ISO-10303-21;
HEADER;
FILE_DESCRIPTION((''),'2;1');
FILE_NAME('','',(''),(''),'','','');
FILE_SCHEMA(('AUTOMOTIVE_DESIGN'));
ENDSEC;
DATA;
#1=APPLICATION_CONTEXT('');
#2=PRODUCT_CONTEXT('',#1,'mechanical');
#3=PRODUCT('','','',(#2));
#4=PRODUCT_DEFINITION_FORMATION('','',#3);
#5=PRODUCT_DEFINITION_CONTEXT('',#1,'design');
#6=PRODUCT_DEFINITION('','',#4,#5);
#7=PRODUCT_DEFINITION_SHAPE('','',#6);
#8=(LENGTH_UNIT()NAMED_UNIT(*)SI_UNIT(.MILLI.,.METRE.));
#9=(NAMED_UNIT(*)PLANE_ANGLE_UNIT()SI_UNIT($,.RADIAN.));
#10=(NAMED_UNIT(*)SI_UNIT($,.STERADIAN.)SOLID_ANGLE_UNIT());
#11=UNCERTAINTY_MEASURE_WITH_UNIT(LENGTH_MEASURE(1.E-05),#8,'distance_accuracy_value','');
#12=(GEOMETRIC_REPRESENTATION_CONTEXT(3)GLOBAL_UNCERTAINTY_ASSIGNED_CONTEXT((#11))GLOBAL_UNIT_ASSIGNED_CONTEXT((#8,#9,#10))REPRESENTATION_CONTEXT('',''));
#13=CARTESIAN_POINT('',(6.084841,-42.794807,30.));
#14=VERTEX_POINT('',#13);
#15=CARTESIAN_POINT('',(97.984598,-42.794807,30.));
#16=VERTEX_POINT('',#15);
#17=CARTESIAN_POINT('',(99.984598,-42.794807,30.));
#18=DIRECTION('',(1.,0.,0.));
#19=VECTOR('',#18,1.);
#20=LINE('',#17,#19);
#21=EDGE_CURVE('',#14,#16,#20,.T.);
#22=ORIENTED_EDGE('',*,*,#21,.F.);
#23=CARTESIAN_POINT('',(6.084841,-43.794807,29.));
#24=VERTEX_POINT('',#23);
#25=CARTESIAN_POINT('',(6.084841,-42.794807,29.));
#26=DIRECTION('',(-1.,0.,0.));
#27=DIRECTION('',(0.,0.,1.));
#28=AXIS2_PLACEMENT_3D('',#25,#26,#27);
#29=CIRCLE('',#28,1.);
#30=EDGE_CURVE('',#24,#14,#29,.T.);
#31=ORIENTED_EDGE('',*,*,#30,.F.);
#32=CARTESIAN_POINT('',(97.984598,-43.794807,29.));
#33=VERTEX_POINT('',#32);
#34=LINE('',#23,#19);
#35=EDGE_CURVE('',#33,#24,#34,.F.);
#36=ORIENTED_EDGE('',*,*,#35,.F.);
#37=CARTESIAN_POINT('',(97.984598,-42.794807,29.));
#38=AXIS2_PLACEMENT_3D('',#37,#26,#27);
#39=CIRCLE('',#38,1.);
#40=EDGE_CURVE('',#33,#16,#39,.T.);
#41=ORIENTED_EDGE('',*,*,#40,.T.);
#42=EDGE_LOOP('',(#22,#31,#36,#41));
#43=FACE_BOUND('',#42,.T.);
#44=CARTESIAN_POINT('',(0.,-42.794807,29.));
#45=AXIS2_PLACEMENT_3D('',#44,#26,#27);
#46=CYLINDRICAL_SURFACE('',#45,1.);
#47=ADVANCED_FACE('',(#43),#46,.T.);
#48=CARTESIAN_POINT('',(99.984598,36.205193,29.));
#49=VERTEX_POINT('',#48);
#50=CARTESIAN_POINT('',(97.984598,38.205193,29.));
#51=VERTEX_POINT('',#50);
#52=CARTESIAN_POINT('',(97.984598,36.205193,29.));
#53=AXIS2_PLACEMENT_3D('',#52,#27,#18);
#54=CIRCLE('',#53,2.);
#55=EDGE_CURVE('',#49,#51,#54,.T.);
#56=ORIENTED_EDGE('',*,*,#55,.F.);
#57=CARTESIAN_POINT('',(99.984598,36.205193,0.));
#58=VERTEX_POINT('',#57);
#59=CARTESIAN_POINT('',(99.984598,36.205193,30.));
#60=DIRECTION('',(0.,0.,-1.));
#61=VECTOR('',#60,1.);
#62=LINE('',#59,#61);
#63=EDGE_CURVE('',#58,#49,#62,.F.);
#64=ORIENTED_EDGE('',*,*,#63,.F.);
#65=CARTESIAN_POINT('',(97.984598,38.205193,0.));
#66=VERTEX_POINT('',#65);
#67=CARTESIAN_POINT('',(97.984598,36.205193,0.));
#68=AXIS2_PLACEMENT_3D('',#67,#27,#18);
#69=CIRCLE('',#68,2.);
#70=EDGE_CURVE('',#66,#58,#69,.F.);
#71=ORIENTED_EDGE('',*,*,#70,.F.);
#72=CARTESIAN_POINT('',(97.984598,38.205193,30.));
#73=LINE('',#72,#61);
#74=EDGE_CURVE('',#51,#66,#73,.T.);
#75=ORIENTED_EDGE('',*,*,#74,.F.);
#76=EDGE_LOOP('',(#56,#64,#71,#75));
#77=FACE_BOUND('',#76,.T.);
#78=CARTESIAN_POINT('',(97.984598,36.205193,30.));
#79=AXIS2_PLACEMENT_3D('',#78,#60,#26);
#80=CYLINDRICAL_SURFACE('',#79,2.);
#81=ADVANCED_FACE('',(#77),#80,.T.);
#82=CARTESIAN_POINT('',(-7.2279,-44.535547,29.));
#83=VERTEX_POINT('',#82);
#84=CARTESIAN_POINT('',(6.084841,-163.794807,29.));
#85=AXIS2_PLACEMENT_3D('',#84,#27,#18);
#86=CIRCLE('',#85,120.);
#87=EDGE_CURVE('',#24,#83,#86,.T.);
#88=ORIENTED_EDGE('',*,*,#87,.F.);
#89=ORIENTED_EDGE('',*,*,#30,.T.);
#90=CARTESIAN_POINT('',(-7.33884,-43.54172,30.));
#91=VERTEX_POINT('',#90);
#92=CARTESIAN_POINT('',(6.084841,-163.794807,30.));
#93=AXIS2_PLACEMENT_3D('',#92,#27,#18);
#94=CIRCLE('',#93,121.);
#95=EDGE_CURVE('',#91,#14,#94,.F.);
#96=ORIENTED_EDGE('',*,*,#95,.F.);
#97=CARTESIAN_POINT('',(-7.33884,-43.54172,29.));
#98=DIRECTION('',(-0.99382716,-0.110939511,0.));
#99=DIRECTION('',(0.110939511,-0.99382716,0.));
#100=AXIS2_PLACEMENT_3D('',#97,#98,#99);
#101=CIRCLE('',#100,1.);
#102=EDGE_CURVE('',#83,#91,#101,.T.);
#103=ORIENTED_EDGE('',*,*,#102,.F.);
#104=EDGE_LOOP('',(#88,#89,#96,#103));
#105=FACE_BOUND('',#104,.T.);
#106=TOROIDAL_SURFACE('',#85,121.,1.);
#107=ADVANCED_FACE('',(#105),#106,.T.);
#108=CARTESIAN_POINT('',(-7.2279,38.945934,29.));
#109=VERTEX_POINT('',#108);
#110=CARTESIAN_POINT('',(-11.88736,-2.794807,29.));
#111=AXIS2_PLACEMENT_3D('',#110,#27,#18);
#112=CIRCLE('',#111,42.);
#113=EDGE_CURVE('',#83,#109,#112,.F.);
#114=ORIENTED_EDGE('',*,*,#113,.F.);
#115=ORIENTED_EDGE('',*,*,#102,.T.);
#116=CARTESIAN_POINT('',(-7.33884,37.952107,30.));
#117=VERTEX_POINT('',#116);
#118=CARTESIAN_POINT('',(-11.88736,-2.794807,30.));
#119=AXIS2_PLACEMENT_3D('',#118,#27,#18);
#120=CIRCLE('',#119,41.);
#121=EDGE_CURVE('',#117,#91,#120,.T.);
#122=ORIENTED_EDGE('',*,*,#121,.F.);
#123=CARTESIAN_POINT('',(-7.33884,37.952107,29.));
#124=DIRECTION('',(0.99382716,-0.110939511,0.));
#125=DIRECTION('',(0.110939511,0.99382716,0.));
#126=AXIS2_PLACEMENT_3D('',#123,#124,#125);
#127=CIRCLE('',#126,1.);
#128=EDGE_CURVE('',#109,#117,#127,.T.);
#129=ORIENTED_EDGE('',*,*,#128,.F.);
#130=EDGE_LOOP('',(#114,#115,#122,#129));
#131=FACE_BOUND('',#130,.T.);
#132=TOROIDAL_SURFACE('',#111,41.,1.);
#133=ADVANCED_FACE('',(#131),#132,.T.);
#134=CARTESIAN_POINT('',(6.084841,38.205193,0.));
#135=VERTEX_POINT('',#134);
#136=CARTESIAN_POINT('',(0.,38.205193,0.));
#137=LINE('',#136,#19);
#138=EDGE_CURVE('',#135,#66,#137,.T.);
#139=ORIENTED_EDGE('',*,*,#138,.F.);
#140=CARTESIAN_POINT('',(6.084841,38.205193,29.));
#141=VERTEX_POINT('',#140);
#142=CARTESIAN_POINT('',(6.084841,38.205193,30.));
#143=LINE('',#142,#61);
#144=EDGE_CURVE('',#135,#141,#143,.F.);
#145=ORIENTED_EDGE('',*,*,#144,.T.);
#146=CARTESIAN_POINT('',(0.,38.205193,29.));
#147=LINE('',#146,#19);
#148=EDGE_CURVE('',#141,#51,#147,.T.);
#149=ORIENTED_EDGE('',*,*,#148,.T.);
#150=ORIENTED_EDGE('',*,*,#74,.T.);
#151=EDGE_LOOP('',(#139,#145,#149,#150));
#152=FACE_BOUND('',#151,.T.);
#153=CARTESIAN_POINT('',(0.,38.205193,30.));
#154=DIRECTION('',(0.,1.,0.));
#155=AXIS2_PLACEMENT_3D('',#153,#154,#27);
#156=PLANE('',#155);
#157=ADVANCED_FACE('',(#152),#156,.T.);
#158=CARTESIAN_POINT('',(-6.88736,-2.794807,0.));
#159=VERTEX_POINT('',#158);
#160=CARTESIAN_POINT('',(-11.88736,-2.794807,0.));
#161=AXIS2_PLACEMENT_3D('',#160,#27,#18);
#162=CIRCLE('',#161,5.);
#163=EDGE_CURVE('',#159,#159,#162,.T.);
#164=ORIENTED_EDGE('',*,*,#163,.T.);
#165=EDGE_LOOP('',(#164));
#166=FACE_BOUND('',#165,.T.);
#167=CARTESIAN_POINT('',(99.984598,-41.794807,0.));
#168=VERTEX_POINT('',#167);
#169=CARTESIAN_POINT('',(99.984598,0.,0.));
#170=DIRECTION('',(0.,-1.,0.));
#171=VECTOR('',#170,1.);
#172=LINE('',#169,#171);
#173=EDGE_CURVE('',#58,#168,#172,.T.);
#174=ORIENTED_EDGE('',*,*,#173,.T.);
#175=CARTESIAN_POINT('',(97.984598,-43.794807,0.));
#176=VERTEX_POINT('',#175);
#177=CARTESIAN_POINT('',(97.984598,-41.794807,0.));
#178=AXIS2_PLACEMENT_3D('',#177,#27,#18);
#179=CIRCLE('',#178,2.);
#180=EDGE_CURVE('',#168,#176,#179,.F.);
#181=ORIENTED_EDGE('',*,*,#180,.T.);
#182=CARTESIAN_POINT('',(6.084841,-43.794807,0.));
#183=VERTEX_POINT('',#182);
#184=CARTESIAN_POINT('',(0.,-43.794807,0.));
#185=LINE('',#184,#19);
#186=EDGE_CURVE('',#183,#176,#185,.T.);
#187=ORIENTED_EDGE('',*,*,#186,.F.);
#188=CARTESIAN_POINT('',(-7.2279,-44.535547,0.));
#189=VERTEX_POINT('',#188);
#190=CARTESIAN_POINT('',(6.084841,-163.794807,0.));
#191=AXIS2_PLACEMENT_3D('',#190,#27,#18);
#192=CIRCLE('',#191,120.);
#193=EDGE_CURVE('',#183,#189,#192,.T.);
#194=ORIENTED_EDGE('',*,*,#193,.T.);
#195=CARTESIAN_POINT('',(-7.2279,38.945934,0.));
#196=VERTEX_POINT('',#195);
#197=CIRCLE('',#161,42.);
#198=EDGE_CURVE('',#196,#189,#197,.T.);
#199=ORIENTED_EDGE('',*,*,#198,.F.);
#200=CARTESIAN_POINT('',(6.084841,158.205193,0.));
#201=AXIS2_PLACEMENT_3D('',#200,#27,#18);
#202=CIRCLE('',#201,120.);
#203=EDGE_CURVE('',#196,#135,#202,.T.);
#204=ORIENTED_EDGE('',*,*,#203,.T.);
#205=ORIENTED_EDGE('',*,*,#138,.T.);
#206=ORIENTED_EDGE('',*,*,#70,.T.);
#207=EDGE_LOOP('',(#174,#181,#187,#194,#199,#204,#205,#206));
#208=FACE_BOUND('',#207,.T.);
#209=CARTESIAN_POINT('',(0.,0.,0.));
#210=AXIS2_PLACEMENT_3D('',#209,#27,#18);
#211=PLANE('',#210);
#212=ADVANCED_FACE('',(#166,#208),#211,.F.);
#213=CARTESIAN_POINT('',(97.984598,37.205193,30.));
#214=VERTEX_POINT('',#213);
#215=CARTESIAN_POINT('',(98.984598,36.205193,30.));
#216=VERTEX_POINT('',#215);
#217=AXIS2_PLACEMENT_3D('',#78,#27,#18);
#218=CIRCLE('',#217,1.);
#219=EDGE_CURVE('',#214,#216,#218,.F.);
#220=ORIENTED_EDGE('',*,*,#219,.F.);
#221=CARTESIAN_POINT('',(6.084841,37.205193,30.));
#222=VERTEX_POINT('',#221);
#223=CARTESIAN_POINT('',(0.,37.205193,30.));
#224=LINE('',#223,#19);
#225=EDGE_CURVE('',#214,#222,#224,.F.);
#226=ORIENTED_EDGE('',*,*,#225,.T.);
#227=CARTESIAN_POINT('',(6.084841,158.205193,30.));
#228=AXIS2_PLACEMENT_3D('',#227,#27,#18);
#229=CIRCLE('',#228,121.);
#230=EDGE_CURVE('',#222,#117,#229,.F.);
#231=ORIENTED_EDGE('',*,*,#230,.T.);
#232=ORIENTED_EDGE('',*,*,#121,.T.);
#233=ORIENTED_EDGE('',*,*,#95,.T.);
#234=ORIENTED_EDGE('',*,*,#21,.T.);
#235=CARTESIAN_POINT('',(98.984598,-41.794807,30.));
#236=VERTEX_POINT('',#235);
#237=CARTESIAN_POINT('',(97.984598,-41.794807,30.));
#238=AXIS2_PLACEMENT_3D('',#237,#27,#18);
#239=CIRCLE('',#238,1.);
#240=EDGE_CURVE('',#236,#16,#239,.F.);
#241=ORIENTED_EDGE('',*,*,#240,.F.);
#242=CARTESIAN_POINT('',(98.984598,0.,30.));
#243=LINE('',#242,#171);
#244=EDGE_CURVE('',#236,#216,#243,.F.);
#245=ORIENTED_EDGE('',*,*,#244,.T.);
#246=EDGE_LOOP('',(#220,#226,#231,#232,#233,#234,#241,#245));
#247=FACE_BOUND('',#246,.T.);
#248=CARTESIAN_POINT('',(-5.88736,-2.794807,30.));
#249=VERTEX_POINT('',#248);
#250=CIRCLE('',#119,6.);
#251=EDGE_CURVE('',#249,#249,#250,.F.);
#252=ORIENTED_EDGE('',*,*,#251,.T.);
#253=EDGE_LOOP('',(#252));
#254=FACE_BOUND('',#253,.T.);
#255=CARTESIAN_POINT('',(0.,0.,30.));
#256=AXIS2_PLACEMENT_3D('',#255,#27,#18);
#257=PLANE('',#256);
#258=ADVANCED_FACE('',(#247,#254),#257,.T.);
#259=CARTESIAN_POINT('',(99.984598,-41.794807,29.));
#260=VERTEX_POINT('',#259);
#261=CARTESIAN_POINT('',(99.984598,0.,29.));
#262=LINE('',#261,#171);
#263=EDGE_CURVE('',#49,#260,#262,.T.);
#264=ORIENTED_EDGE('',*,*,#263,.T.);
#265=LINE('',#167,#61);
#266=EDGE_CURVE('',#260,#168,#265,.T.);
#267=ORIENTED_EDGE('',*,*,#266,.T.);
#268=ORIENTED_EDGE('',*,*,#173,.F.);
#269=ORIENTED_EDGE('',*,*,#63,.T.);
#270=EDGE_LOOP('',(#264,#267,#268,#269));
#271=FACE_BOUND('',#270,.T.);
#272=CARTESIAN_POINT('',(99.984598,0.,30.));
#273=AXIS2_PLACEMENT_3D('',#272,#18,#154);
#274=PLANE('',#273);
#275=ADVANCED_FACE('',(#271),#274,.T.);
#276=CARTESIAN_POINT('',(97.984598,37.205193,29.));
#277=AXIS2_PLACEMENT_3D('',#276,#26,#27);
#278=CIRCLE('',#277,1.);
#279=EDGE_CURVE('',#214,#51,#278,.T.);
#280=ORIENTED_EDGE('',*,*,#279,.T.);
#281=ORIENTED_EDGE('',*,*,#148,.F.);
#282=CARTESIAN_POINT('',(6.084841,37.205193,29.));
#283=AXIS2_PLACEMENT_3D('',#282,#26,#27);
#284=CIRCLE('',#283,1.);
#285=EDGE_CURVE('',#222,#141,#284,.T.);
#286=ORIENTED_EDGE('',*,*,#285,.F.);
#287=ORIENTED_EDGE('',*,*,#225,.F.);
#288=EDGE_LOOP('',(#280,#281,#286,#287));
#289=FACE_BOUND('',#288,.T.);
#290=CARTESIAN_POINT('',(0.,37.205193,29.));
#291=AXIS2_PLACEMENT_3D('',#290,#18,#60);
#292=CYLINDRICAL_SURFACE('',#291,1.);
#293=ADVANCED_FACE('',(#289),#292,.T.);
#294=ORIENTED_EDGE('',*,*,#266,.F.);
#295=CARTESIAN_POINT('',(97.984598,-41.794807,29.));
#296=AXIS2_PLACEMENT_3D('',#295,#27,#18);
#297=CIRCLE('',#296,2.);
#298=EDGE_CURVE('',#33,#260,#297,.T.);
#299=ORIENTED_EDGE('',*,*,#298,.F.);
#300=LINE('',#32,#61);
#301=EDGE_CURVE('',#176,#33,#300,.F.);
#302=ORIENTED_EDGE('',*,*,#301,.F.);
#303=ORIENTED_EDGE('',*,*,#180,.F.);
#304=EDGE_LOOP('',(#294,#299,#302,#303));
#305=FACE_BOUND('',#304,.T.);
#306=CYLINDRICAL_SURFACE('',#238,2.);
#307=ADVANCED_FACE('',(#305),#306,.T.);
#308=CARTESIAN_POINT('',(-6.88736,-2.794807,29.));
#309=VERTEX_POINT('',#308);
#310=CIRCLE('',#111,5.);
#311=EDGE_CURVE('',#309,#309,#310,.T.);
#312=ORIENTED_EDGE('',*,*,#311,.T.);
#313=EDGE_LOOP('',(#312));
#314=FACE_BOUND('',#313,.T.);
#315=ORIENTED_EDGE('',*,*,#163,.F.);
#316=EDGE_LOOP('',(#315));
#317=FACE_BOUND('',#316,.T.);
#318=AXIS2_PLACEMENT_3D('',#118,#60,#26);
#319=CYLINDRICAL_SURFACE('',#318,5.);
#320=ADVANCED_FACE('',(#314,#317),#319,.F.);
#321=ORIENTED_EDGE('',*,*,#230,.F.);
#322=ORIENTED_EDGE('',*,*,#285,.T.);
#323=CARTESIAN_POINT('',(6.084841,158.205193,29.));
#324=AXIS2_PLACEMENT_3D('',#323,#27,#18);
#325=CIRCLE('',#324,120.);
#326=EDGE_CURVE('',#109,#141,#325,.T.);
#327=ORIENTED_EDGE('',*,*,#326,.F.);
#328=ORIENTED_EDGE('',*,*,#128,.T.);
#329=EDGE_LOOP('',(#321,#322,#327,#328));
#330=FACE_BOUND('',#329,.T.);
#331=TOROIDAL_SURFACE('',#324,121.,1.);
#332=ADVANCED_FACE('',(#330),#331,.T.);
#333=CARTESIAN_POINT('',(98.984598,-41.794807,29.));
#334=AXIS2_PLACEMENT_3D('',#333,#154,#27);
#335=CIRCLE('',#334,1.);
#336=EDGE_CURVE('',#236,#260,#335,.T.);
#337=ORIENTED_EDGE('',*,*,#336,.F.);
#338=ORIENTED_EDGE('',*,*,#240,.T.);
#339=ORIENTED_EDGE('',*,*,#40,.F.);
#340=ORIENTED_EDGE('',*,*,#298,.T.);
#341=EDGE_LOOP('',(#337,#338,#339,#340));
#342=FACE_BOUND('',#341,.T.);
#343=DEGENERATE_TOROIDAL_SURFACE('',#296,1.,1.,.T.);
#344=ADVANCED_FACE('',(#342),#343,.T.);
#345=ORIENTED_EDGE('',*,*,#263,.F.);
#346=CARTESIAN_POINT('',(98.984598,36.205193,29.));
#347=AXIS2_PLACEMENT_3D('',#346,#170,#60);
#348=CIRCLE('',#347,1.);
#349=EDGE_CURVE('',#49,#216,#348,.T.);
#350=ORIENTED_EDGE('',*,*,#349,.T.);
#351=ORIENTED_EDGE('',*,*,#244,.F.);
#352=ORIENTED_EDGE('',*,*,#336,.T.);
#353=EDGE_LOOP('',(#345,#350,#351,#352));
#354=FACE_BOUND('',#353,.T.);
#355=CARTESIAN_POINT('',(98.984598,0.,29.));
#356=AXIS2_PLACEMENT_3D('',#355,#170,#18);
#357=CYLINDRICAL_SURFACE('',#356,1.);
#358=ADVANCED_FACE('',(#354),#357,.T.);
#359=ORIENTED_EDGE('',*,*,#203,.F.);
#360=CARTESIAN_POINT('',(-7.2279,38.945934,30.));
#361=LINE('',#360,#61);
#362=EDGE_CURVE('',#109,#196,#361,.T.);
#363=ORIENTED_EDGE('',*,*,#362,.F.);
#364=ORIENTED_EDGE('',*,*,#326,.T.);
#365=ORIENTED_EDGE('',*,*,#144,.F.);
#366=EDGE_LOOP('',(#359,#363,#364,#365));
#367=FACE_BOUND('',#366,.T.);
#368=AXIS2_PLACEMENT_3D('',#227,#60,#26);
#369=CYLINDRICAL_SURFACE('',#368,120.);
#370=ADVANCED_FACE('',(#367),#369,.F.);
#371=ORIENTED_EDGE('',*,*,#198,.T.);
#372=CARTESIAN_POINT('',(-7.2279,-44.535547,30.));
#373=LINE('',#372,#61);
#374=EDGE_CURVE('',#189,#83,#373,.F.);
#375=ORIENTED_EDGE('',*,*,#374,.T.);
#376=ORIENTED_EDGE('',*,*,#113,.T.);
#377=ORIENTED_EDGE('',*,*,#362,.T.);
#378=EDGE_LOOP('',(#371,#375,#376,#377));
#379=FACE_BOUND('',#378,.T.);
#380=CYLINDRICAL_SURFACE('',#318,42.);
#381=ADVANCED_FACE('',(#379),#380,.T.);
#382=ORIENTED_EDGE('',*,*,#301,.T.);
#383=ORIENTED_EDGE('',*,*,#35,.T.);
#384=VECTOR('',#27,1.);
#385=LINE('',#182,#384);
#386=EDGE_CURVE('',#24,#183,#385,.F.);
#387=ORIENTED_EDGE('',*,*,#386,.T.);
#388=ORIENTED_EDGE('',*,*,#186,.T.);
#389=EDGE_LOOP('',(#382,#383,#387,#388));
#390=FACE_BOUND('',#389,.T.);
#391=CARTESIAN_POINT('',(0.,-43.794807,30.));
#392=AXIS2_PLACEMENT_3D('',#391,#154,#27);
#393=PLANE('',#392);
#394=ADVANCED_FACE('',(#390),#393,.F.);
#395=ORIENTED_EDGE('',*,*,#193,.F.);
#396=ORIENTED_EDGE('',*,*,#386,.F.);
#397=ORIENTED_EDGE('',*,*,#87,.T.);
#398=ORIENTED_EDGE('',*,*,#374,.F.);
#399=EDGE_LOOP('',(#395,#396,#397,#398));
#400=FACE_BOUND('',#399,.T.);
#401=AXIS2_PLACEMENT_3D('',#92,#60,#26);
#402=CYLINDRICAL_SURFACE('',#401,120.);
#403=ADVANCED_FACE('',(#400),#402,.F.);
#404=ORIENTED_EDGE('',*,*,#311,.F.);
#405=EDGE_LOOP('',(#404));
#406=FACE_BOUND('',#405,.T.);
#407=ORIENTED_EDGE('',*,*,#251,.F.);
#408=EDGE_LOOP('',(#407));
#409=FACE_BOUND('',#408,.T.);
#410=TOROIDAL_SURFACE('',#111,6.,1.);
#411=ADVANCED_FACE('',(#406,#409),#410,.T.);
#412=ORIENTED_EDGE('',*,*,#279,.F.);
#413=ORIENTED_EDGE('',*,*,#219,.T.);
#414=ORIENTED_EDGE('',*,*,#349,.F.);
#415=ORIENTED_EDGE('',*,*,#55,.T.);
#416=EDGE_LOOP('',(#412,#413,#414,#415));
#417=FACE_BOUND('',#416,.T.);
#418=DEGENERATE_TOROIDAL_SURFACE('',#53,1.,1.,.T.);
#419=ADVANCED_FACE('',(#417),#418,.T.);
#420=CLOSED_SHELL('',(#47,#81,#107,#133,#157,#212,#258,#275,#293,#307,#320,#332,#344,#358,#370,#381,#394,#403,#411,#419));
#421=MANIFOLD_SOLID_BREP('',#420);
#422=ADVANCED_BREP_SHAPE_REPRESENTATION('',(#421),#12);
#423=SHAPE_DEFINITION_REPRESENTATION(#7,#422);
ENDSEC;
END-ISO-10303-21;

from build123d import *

# Parameters (mm, degrees)
SKETCH_1_R      = 5
EXTRUDE_1_DEPTH = 30
FILLET_1_R      = 120
FILLET_2_R      = 1
FILLET_3_R      = 1
FILLET_4_R      = 2


with BuildPart() as part:
    # 草图1 → 凸台-拉伸1 (new body)
    with BuildSketch(Plane.XY):
        with BuildLine():
            Line((-2.776926107, -43.794806673), (99.984598045, -43.794806673))
            Line((99.984598045, -43.794806673), (99.984598045, 38.205193327))
            Line((99.984598045, 38.205193327), (-2.776926107, 38.205193327))
            ThreePointArc((-2.776926107, 38.205193327), (-53.887359686, -2.794806673), (-2.776926107, -43.794806673))
        make_face()
        with Locations((-11.887359686, -2.794806673)):
            Circle(SKETCH_1_R, mode=Mode.SUBTRACT)
    extrude(amount=EXTRUDE_1_DEPTH)

    # 圆角1
    fillet_1_edges = [part.edges().sort_by_distance(p)[0] for p in [
        (-2.776926107, 38.205193327, 15),
        (-2.776926107, -43.794806673, 15),
    ]]
    fillet(fillet_1_edges, radius=FILLET_1_R)

    # 圆角2
    fillet_2_edges = [part.edges().sort_by_distance(p)[0] for p in [
        (-16.887359686, -2.794806673, 30),
    ]]
    fillet(fillet_2_edges, radius=FILLET_2_R)

    # 圆角3
    fillet_3_edges = [part.edges().sort_by_distance(p)[0] for p in [
        (99.984598045, -2.794806673, 30),
        (-53.887359686, -2.794806673, 30),
        (53.034719557, 38.205193327, 30),
        (53.034719557, -43.794806673, 30),
        (-0.581825597, 38.390521623, 30),
        (-0.581825597, -43.980134969, 30),
    ]]
    fillet(fillet_3_edges, radius=FILLET_3_R)

    # 圆角4
    # the kernel refuses this fillet: 2 mm, written as the material it takes off along each edge
    with BuildSketch(Plane(origin=(97.984598045, -41.794806673, 30), x_dir=(0, -1, 0), z_dir=(-1, 0, 0))) as fillet_4_piece_1:
        with BuildLine():
            CenterArc((1, -1), 1, 0, 90)
            Line((2, -1), (2, 0))
            Line((2, 0), (1, 0))
        make_face()
    revolve(axis=Axis((97.984598045, -41.794806673, 30), (0, 0, 1)), revolution_arc=90, mode=Mode.SUBTRACT)
    with BuildSketch(Plane(origin=(97.984598045, 36.205193327, 30), x_dir=(1, 0, 0), z_dir=(0, -1, 0))) as fillet_4_piece_2:
        with BuildLine():
            CenterArc((1, -1), 1, 0, 90)
            Line((2, -1), (2, 0))
            Line((2, 0), (1, 0))
        make_face()
    revolve(axis=Axis((97.984598045, 36.205193327, 30), (0, 0, 1)), revolution_arc=90, mode=Mode.SUBTRACT)
    with BuildSketch(Plane(origin=(99.984598045, 38.205193327, -5), x_dir=(0, -1, 0), z_dir=(0, 0, 1))) as fillet_4_piece_3:
        with BuildLine():
            CenterArc((FILLET_4_R, -FILLET_4_R), FILLET_4_R, 90, 90)
            Line((0, -FILLET_4_R), (0, 0))
            Line((0, 0), (FILLET_4_R, 0))
        make_face()
    extrude(amount=35, mode=Mode.SUBTRACT)
    with BuildSketch(Plane(origin=(99.984598045, -43.794806673, -5), x_dir=(0, 1, 0), z_dir=(0, 0, 1))) as fillet_4_piece_4:
        with BuildLine():
            CenterArc((FILLET_4_R, FILLET_4_R), FILLET_4_R, 180, 90)
            Line((0, FILLET_4_R), (0, 0))
            Line((0, 0), (FILLET_4_R, 0))
        make_face()
    extrude(amount=35, mode=Mode.SUBTRACT)


solid = part.part
